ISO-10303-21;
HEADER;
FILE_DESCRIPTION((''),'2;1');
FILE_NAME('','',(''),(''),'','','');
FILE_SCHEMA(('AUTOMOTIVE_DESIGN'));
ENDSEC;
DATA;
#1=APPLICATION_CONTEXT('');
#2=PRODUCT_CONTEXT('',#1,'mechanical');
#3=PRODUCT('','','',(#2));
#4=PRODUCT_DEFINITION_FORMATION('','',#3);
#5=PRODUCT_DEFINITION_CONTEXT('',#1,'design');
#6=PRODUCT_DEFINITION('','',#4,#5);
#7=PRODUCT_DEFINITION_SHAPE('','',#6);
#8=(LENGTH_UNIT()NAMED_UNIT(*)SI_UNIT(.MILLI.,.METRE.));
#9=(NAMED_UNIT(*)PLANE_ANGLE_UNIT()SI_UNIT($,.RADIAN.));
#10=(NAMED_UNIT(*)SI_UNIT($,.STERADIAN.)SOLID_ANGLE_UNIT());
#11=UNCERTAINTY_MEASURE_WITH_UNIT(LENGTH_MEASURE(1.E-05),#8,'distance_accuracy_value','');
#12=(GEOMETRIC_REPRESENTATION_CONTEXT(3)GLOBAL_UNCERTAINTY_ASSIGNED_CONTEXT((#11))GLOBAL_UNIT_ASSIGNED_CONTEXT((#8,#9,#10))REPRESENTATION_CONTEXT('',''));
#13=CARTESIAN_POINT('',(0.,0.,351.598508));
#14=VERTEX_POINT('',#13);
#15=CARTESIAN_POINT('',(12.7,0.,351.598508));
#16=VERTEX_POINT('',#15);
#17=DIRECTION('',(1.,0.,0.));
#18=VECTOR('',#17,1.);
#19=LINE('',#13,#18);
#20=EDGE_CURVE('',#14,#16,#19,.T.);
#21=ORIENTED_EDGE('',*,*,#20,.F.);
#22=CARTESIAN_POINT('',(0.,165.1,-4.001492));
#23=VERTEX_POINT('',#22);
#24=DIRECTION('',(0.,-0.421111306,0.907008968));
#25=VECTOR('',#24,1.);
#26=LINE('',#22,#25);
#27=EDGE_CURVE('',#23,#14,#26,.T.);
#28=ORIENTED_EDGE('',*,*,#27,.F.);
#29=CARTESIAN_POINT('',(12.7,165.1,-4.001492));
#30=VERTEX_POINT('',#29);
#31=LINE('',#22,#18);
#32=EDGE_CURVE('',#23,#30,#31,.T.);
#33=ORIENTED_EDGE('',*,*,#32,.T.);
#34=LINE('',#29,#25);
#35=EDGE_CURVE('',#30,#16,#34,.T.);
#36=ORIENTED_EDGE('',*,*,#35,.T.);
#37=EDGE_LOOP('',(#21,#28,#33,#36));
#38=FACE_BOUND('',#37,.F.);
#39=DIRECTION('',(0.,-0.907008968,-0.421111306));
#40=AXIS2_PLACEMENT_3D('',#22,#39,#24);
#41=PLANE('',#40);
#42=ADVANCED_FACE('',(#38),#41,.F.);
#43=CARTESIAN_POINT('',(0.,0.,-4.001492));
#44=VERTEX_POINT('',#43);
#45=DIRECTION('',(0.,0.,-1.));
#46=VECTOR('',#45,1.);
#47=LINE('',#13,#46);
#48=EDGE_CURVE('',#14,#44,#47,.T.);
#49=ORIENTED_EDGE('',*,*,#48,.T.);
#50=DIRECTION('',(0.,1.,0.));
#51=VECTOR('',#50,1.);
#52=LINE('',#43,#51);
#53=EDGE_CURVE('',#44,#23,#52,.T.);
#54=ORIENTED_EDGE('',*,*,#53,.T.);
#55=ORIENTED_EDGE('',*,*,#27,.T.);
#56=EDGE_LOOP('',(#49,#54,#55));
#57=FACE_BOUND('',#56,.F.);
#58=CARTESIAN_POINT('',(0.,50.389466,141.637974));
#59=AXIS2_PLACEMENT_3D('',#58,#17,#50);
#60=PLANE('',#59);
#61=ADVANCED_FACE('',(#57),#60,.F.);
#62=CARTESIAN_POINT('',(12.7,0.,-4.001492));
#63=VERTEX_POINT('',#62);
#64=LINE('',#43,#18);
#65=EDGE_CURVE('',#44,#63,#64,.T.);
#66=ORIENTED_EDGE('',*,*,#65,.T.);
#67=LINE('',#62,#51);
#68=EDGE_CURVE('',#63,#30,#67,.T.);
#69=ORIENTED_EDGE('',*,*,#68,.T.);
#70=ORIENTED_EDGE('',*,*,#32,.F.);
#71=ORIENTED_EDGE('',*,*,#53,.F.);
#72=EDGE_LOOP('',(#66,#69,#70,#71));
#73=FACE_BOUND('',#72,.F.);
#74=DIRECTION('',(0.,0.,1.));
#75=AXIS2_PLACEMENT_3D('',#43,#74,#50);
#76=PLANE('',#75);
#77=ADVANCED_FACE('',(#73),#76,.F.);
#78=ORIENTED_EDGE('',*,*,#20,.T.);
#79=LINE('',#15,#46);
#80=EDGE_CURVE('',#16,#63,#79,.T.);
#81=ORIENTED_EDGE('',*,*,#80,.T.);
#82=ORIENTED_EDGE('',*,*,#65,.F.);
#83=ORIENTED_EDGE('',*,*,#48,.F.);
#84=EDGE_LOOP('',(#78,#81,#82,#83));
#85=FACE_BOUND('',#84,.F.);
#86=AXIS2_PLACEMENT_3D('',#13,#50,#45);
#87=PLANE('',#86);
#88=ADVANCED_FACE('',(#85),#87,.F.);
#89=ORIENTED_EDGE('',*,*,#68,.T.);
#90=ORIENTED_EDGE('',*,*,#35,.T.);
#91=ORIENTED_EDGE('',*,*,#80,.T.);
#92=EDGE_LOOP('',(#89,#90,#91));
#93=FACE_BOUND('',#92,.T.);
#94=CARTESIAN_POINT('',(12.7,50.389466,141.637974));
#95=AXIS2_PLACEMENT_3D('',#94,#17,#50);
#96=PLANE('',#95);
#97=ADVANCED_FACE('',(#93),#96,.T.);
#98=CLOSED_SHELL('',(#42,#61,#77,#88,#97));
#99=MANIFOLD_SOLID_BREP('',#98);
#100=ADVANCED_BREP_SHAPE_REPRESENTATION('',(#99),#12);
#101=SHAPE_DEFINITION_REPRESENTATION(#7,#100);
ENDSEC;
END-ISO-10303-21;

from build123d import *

# Parameters (mm, degrees)
F2_DEPTH = 12.7


# Not quite as in the source:
# - a variable given as a bare number and used for a length is read in inches; the dataset says mm whatever the document's units were


with BuildPart() as f2:
    # F1 (on Right) → F2 (new body)
    with BuildSketch(Plane.YZ):
        Polygon((0, 351.5985079486), (0, -4.0014920514), (165.1, -4.0014920514), align=None)
    extrude(amount=F2_DEPTH)


solid = f2.part
